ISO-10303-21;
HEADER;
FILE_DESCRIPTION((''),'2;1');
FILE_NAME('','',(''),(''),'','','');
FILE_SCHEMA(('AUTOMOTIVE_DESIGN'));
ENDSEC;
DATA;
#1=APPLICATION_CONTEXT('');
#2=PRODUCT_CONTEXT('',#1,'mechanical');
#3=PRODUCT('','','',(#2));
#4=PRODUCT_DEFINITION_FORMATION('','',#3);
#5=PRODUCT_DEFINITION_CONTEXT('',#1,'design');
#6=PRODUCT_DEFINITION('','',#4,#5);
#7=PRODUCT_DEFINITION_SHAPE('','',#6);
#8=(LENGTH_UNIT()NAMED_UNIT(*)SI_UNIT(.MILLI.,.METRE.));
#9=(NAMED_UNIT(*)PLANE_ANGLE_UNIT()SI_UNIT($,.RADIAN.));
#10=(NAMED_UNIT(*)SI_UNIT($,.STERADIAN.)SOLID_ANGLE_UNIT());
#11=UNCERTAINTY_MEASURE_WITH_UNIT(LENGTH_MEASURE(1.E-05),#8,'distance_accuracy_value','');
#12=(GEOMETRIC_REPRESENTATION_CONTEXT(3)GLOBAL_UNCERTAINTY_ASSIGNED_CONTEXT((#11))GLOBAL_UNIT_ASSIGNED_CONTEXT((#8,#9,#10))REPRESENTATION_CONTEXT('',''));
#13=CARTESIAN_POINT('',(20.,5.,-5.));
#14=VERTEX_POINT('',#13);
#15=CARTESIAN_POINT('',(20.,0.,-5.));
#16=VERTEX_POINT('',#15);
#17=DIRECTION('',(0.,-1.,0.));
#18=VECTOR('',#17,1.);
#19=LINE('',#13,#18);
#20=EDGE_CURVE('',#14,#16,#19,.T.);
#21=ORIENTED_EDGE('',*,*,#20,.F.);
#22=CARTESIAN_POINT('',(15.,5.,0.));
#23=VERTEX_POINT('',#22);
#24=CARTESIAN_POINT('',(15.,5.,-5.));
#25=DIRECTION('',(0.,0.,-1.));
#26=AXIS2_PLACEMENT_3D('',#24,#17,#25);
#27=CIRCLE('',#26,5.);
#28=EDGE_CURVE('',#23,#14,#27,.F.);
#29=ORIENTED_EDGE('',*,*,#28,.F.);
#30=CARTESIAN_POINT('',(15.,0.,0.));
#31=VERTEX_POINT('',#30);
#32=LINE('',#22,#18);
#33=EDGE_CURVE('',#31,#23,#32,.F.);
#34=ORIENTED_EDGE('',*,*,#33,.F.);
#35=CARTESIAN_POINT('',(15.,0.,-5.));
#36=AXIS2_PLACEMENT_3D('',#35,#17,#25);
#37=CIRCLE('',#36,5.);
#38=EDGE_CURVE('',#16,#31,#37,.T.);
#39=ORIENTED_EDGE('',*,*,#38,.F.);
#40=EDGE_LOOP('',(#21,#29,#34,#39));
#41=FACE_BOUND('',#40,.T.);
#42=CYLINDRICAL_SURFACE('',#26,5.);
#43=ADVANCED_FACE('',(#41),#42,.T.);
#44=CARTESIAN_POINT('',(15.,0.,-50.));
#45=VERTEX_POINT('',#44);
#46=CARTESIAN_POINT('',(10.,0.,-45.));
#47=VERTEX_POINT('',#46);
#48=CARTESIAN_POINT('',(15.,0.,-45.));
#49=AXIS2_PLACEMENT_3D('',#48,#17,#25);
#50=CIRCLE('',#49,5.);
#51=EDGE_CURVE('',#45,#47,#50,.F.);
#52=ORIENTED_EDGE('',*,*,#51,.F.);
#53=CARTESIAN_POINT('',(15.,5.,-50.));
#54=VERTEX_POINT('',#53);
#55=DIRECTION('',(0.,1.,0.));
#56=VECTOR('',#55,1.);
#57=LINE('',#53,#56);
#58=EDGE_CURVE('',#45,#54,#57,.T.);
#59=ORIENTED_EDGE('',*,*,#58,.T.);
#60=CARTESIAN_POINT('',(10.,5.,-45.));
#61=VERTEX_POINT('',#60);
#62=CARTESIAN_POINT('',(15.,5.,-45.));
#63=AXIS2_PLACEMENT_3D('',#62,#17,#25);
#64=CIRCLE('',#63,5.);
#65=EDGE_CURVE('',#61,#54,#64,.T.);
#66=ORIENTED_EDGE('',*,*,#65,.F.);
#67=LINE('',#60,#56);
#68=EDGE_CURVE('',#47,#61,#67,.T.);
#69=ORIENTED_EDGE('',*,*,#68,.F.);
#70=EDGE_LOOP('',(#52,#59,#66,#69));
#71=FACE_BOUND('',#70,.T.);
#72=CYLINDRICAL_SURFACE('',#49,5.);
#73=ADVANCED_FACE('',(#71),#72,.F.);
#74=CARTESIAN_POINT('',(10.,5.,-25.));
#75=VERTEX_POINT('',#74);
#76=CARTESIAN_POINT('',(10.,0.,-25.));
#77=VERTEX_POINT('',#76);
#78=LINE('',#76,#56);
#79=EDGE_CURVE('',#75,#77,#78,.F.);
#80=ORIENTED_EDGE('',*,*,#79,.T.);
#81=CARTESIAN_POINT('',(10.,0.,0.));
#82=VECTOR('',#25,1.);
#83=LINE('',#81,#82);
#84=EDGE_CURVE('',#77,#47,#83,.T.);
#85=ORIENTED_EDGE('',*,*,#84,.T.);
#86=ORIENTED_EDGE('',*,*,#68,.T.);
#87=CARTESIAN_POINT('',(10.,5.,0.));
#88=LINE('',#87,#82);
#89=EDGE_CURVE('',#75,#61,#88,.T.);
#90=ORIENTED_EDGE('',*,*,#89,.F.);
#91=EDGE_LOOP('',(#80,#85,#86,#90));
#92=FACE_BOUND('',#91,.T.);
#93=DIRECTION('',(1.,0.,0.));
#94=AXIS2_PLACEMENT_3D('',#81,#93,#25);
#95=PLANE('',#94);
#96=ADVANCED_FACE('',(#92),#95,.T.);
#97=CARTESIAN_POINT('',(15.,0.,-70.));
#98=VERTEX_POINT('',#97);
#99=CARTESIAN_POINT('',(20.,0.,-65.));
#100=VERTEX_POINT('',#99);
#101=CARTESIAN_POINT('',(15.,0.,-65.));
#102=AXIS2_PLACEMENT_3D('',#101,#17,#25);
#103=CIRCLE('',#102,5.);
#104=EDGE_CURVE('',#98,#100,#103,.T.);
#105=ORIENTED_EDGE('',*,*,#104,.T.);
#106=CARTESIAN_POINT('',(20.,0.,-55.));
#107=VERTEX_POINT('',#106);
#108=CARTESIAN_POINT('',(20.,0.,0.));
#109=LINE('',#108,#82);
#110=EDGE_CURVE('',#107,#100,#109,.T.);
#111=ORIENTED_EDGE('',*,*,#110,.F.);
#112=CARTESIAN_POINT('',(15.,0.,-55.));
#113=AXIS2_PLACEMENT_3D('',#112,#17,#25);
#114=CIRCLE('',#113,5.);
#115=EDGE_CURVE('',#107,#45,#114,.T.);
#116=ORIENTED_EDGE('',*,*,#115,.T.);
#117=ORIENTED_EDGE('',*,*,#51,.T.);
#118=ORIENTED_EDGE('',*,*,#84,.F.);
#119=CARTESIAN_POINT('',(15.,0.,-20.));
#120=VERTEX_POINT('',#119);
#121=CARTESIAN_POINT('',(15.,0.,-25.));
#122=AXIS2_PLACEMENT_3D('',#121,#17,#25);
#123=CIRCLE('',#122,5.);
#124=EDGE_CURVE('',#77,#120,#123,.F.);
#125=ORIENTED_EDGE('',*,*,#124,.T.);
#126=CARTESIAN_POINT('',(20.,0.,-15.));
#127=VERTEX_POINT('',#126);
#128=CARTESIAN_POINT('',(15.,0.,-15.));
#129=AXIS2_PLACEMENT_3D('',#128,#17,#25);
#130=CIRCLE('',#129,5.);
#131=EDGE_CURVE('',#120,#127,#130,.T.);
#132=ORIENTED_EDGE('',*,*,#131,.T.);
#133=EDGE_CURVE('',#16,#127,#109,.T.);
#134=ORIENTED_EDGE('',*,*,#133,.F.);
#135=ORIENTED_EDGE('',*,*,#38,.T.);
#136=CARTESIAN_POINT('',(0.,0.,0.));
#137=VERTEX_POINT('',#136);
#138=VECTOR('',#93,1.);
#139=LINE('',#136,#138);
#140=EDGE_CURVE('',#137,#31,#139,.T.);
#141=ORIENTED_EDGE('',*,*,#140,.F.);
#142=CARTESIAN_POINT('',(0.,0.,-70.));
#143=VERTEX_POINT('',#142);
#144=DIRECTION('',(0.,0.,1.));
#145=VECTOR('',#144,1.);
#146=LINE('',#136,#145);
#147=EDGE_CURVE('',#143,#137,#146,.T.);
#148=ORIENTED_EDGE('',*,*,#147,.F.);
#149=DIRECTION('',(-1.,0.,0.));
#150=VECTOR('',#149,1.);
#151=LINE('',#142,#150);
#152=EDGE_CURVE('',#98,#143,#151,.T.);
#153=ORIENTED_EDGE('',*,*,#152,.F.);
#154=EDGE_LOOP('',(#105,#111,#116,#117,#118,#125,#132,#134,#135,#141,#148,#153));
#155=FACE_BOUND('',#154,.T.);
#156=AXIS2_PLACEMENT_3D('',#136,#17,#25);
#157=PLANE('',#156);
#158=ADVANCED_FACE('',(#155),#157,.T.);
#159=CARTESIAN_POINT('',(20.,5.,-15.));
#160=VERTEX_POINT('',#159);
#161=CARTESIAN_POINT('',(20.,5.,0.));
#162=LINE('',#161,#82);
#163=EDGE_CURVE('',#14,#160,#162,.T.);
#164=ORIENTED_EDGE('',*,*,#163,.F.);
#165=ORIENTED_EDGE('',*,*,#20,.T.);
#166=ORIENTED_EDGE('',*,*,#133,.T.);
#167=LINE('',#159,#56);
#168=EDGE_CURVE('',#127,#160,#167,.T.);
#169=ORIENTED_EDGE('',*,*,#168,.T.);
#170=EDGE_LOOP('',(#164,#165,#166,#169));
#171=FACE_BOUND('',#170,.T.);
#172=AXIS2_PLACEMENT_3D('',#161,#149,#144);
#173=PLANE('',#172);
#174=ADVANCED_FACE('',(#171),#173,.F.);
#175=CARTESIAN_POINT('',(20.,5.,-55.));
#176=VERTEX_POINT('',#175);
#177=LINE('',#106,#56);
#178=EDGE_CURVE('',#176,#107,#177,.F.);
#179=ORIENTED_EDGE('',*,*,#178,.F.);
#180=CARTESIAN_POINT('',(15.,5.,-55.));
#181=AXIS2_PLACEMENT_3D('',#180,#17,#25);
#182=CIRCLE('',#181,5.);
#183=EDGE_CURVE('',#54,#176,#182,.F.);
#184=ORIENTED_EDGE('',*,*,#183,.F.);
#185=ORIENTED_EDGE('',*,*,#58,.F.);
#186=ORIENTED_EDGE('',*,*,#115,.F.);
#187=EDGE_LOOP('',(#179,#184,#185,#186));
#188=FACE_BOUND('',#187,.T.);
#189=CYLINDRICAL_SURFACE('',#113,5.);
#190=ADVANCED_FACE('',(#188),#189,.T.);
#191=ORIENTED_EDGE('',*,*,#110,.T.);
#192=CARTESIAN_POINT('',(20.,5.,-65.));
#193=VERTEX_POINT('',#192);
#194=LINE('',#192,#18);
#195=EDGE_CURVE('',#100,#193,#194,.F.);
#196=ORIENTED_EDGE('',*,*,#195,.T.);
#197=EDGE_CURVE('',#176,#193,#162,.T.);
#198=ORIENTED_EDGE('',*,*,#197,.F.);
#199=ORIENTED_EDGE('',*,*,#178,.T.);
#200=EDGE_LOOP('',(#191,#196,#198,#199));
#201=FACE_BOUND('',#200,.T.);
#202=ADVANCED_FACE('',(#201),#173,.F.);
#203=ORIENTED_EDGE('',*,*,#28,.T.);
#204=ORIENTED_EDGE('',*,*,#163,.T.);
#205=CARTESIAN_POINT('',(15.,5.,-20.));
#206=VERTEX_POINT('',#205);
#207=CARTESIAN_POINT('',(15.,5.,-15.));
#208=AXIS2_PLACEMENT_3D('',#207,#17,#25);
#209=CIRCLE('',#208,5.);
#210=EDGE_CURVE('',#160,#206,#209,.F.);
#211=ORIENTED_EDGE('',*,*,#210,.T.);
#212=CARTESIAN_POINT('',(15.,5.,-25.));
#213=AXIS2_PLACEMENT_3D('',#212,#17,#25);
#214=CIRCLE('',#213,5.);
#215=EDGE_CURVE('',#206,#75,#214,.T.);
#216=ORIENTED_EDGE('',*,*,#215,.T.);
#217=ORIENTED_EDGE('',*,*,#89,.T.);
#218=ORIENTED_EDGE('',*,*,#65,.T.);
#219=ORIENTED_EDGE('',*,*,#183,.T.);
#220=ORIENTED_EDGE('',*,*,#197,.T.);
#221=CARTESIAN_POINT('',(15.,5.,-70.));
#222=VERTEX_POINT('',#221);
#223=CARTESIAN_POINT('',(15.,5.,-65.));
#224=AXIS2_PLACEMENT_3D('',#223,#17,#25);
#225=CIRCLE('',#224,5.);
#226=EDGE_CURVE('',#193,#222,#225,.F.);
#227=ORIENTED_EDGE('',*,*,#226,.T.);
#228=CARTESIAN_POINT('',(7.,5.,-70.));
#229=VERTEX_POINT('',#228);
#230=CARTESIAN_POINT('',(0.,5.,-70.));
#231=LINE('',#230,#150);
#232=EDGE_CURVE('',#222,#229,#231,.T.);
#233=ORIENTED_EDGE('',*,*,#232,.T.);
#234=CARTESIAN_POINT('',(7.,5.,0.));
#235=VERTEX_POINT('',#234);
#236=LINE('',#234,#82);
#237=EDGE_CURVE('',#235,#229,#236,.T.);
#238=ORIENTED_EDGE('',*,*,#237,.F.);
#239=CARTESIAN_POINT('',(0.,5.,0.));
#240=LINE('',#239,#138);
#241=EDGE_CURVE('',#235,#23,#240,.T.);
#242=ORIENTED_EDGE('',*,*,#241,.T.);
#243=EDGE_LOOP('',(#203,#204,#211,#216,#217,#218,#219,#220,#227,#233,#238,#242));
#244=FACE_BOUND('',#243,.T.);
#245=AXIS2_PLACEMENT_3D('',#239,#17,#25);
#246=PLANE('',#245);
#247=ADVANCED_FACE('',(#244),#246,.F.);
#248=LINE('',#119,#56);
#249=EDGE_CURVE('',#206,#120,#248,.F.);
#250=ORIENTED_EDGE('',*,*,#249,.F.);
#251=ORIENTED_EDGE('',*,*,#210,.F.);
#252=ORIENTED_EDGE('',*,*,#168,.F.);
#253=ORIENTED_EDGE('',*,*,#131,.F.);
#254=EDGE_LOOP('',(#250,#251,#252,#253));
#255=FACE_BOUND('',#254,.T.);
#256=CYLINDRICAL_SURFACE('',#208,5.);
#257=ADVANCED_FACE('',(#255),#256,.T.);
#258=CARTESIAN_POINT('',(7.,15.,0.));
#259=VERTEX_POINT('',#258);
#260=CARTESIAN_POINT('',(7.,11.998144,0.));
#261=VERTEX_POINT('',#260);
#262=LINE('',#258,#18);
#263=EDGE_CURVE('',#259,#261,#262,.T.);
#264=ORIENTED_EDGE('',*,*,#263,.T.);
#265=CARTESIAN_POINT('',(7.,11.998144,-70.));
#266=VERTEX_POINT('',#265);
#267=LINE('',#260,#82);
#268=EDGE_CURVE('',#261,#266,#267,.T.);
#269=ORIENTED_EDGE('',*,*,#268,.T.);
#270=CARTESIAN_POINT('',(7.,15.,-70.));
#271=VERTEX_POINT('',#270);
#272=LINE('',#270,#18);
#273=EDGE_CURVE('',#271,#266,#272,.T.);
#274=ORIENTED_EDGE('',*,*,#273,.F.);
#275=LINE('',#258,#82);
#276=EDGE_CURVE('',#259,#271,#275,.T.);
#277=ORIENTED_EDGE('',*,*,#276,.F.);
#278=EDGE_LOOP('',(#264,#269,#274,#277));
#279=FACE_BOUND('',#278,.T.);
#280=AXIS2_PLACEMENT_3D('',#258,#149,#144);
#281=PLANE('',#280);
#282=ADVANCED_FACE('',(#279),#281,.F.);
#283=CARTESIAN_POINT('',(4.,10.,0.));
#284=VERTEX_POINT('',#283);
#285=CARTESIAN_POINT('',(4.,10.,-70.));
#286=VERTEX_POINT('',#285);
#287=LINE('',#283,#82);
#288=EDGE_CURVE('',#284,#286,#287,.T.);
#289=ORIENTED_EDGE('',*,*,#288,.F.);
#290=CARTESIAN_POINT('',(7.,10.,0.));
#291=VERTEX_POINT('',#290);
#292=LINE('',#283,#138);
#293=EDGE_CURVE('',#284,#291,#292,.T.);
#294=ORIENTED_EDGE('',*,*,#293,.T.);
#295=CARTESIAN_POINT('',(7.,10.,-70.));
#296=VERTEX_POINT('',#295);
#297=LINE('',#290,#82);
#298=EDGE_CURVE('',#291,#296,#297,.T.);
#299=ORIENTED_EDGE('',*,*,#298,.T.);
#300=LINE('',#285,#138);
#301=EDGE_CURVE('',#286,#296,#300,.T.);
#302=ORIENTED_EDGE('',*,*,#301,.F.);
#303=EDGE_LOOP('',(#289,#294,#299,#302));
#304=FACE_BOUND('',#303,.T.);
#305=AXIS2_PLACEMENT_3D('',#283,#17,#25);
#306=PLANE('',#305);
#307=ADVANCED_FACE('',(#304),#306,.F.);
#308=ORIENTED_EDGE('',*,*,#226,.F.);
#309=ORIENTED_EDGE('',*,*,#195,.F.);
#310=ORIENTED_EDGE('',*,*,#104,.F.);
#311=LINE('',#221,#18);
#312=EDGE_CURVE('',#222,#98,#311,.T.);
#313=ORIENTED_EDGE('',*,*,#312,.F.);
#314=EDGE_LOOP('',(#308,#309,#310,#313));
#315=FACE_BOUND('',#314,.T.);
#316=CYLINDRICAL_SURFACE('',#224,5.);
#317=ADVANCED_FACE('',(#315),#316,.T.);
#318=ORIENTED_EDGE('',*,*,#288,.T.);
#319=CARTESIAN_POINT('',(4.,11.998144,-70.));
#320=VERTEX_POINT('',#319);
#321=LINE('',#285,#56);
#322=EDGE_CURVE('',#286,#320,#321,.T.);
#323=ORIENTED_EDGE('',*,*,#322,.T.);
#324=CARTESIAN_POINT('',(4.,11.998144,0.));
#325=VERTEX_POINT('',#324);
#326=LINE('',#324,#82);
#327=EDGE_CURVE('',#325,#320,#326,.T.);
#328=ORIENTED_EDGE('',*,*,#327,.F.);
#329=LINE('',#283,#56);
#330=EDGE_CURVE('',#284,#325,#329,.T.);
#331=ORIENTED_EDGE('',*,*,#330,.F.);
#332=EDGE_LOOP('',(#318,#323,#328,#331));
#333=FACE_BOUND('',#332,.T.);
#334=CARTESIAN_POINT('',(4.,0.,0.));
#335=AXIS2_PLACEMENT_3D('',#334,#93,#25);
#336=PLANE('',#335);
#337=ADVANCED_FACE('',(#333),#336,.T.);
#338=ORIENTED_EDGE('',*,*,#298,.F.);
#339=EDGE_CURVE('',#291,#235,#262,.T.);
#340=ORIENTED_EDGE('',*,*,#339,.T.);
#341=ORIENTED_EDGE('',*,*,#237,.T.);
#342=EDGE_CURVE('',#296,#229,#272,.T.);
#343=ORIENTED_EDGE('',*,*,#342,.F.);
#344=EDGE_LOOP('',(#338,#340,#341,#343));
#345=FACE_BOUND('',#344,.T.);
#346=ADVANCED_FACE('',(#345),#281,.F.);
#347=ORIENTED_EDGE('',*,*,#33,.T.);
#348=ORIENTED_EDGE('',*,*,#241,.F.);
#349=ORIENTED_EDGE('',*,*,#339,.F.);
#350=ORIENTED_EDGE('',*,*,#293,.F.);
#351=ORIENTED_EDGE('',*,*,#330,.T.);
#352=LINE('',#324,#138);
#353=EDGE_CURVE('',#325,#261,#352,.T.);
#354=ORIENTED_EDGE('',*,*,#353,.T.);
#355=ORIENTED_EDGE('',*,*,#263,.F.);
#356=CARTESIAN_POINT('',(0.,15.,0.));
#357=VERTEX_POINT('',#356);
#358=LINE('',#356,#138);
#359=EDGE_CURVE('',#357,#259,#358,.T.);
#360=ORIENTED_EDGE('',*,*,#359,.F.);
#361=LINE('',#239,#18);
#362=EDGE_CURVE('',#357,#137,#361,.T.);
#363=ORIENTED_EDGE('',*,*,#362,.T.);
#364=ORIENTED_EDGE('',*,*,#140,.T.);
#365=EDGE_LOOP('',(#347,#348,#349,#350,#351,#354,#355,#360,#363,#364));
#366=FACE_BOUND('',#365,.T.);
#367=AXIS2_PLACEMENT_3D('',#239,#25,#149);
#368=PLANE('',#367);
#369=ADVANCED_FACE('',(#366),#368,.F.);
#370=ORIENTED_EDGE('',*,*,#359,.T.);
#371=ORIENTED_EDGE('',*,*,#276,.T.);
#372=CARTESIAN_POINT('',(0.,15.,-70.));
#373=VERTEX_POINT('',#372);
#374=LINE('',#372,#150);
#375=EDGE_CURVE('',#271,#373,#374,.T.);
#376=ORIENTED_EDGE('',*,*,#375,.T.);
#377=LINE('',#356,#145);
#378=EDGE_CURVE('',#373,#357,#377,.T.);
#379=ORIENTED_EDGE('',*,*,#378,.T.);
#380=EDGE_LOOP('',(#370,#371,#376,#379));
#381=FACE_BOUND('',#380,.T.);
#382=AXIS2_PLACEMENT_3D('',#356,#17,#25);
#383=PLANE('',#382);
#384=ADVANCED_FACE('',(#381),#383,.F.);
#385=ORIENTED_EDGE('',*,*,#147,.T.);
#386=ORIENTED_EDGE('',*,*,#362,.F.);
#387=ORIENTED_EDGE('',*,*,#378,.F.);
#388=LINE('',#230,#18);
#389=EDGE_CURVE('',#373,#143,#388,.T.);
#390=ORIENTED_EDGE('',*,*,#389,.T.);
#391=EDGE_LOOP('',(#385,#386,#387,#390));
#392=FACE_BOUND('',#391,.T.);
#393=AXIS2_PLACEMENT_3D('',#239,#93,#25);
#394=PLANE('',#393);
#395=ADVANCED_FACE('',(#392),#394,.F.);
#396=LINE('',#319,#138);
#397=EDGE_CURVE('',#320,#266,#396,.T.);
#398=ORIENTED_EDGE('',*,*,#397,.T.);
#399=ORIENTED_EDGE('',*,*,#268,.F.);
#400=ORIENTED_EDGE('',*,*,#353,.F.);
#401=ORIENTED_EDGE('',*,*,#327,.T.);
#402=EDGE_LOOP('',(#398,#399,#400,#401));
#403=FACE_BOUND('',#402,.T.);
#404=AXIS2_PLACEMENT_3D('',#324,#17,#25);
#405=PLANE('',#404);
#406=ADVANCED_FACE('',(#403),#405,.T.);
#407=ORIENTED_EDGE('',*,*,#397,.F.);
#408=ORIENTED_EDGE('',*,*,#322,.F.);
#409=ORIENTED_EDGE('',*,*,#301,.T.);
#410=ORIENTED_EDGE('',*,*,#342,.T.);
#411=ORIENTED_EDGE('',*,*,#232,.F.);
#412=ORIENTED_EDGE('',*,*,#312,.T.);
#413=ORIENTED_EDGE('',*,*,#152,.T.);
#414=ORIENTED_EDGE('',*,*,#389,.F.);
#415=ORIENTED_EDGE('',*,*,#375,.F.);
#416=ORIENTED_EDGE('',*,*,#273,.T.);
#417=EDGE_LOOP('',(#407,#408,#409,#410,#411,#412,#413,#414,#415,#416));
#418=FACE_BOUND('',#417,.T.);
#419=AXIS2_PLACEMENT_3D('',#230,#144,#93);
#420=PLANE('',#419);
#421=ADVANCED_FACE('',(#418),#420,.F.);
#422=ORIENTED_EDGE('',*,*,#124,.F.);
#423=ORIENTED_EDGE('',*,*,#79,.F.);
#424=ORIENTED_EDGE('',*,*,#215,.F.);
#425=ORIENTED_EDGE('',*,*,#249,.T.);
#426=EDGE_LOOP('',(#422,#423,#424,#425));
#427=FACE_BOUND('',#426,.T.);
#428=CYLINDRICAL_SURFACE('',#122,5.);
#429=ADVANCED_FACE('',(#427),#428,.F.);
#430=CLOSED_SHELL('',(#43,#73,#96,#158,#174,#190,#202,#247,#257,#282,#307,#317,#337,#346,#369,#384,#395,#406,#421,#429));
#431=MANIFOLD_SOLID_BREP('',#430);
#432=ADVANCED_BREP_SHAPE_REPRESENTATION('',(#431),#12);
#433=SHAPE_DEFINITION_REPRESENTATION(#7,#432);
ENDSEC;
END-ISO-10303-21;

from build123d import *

# Parameters (mm, degrees)
SKETCH4_W           = 20
SKETCH4_H           = 70
BOSS_EXTRUDE2_DEPTH = 5
SKETCH5_W           = 7
SKETCH5_H           = 70
BOSS_EXTRUDE3_DEPTH = 10
SKETCH6_W           = 70
SKETCH6_H           = 1.998143523
CUT_EXTRUDE1_DEPTH  = 3
SKETCH8_W           = 10
SKETCH8_H           = 30
CUT_EXTRUDE2_DEPTH  = 74.484692283
FILLET3_START       = -1
FILLET3_DEPTH       = 6
FILLET3_2_DEPTH     = 5
FILLET4_R           = 5


with BuildPart() as part:
    # Sketch4 → Boss-Extrude2 (new body)
    with BuildSketch(Plane(origin=(0, 0, 0), x_dir=(1, 0, 0), z_dir=(0, 1, 0))):
        with Locations((10, 35)):
            Rectangle(SKETCH4_W, SKETCH4_H)
    extrude(amount=BOSS_EXTRUDE2_DEPTH)

    # Sketch5 → Boss-Extrude3 (add)
    with BuildSketch(Plane(origin=(0, 5, 0), x_dir=(1, 0, 0), z_dir=(0, 1, 0))):
        with Locations((3.5, 35)):
            Rectangle(SKETCH5_W, SKETCH5_H)
    extrude(amount=BOSS_EXTRUDE3_DEPTH)

    # Sketch6 → Cut-Extrude1 (cut)
    with BuildSketch(Plane(origin=(7, 0, 0), x_dir=(0, 0, -1), z_dir=(1, 0, 0))):
        with Locations((35, 10.999071762)):
            Rectangle(SKETCH6_W, SKETCH6_H)
    extrude(amount=-CUT_EXTRUDE1_DEPTH, mode=Mode.SUBTRACT)

    # Sketch8 → Cut-Extrude2 (cut, through all)
    with BuildSketch(Plane(origin=(0, 5, 0), x_dir=(1, 0, 0), z_dir=(0, 1, 0))):
        with Locations((15, 35)):
            Rectangle(SKETCH8_W, SKETCH8_H)
    extrude(amount=-CUT_EXTRUDE2_DEPTH, mode=Mode.SUBTRACT)

    # Fillet3: read off the stored shape, not the designer's step
    # Fillet3 outline → Fillet3 (cut)
    with BuildSketch(Plane(origin=(0, 0, 0), x_dir=(1, 0, 0), z_dir=(0, 1, 0)).offset(FILLET3_START)):
        with BuildLine():
            Line((20, 50), (20, 55))
            ThreePointArc((20, 55), (18.535533906, 51.464466094), (15, 50))
            Line((15, 50), (20, 50))
        make_face()
        with BuildLine():
            Line((20, 20), (15, 20))
            ThreePointArc((15, 20), (18.535533906, 18.535533906), (20, 15))
            Line((20, 15), (20, 20))
        make_face()
    extrude(amount=FILLET3_DEPTH, mode=Mode.SUBTRACT)

    # Fillet3 2 outline → Fillet3 2 (add)
    with BuildSketch(Plane(origin=(0, 0, 0), x_dir=(1, 0, 0), z_dir=(0, 1, 0))):
        with BuildLine():
            ThreePointArc((15, 20), (11.464466094, 21.464466094), (10, 25))
            Line((10, 25), (10, 20))
            Line((10, 20), (15, 20))
        make_face()
        with BuildLine():
            ThreePointArc((10, 45), (11.464466094, 48.535533906), (15, 50))
            Line((15, 50), (10, 50))
            Line((10, 50), (10, 45))
        make_face()
    extrude(amount=FILLET3_2_DEPTH)

    # Fillet4
    fillet4_edges = [part.edges().sort_by_distance(p)[0] for p in [
        (20, 2.5, -70),
        (20, 2.5, 0),
    ]]
    fillet(fillet4_edges, radius=FILLET4_R)


solid = part.part
